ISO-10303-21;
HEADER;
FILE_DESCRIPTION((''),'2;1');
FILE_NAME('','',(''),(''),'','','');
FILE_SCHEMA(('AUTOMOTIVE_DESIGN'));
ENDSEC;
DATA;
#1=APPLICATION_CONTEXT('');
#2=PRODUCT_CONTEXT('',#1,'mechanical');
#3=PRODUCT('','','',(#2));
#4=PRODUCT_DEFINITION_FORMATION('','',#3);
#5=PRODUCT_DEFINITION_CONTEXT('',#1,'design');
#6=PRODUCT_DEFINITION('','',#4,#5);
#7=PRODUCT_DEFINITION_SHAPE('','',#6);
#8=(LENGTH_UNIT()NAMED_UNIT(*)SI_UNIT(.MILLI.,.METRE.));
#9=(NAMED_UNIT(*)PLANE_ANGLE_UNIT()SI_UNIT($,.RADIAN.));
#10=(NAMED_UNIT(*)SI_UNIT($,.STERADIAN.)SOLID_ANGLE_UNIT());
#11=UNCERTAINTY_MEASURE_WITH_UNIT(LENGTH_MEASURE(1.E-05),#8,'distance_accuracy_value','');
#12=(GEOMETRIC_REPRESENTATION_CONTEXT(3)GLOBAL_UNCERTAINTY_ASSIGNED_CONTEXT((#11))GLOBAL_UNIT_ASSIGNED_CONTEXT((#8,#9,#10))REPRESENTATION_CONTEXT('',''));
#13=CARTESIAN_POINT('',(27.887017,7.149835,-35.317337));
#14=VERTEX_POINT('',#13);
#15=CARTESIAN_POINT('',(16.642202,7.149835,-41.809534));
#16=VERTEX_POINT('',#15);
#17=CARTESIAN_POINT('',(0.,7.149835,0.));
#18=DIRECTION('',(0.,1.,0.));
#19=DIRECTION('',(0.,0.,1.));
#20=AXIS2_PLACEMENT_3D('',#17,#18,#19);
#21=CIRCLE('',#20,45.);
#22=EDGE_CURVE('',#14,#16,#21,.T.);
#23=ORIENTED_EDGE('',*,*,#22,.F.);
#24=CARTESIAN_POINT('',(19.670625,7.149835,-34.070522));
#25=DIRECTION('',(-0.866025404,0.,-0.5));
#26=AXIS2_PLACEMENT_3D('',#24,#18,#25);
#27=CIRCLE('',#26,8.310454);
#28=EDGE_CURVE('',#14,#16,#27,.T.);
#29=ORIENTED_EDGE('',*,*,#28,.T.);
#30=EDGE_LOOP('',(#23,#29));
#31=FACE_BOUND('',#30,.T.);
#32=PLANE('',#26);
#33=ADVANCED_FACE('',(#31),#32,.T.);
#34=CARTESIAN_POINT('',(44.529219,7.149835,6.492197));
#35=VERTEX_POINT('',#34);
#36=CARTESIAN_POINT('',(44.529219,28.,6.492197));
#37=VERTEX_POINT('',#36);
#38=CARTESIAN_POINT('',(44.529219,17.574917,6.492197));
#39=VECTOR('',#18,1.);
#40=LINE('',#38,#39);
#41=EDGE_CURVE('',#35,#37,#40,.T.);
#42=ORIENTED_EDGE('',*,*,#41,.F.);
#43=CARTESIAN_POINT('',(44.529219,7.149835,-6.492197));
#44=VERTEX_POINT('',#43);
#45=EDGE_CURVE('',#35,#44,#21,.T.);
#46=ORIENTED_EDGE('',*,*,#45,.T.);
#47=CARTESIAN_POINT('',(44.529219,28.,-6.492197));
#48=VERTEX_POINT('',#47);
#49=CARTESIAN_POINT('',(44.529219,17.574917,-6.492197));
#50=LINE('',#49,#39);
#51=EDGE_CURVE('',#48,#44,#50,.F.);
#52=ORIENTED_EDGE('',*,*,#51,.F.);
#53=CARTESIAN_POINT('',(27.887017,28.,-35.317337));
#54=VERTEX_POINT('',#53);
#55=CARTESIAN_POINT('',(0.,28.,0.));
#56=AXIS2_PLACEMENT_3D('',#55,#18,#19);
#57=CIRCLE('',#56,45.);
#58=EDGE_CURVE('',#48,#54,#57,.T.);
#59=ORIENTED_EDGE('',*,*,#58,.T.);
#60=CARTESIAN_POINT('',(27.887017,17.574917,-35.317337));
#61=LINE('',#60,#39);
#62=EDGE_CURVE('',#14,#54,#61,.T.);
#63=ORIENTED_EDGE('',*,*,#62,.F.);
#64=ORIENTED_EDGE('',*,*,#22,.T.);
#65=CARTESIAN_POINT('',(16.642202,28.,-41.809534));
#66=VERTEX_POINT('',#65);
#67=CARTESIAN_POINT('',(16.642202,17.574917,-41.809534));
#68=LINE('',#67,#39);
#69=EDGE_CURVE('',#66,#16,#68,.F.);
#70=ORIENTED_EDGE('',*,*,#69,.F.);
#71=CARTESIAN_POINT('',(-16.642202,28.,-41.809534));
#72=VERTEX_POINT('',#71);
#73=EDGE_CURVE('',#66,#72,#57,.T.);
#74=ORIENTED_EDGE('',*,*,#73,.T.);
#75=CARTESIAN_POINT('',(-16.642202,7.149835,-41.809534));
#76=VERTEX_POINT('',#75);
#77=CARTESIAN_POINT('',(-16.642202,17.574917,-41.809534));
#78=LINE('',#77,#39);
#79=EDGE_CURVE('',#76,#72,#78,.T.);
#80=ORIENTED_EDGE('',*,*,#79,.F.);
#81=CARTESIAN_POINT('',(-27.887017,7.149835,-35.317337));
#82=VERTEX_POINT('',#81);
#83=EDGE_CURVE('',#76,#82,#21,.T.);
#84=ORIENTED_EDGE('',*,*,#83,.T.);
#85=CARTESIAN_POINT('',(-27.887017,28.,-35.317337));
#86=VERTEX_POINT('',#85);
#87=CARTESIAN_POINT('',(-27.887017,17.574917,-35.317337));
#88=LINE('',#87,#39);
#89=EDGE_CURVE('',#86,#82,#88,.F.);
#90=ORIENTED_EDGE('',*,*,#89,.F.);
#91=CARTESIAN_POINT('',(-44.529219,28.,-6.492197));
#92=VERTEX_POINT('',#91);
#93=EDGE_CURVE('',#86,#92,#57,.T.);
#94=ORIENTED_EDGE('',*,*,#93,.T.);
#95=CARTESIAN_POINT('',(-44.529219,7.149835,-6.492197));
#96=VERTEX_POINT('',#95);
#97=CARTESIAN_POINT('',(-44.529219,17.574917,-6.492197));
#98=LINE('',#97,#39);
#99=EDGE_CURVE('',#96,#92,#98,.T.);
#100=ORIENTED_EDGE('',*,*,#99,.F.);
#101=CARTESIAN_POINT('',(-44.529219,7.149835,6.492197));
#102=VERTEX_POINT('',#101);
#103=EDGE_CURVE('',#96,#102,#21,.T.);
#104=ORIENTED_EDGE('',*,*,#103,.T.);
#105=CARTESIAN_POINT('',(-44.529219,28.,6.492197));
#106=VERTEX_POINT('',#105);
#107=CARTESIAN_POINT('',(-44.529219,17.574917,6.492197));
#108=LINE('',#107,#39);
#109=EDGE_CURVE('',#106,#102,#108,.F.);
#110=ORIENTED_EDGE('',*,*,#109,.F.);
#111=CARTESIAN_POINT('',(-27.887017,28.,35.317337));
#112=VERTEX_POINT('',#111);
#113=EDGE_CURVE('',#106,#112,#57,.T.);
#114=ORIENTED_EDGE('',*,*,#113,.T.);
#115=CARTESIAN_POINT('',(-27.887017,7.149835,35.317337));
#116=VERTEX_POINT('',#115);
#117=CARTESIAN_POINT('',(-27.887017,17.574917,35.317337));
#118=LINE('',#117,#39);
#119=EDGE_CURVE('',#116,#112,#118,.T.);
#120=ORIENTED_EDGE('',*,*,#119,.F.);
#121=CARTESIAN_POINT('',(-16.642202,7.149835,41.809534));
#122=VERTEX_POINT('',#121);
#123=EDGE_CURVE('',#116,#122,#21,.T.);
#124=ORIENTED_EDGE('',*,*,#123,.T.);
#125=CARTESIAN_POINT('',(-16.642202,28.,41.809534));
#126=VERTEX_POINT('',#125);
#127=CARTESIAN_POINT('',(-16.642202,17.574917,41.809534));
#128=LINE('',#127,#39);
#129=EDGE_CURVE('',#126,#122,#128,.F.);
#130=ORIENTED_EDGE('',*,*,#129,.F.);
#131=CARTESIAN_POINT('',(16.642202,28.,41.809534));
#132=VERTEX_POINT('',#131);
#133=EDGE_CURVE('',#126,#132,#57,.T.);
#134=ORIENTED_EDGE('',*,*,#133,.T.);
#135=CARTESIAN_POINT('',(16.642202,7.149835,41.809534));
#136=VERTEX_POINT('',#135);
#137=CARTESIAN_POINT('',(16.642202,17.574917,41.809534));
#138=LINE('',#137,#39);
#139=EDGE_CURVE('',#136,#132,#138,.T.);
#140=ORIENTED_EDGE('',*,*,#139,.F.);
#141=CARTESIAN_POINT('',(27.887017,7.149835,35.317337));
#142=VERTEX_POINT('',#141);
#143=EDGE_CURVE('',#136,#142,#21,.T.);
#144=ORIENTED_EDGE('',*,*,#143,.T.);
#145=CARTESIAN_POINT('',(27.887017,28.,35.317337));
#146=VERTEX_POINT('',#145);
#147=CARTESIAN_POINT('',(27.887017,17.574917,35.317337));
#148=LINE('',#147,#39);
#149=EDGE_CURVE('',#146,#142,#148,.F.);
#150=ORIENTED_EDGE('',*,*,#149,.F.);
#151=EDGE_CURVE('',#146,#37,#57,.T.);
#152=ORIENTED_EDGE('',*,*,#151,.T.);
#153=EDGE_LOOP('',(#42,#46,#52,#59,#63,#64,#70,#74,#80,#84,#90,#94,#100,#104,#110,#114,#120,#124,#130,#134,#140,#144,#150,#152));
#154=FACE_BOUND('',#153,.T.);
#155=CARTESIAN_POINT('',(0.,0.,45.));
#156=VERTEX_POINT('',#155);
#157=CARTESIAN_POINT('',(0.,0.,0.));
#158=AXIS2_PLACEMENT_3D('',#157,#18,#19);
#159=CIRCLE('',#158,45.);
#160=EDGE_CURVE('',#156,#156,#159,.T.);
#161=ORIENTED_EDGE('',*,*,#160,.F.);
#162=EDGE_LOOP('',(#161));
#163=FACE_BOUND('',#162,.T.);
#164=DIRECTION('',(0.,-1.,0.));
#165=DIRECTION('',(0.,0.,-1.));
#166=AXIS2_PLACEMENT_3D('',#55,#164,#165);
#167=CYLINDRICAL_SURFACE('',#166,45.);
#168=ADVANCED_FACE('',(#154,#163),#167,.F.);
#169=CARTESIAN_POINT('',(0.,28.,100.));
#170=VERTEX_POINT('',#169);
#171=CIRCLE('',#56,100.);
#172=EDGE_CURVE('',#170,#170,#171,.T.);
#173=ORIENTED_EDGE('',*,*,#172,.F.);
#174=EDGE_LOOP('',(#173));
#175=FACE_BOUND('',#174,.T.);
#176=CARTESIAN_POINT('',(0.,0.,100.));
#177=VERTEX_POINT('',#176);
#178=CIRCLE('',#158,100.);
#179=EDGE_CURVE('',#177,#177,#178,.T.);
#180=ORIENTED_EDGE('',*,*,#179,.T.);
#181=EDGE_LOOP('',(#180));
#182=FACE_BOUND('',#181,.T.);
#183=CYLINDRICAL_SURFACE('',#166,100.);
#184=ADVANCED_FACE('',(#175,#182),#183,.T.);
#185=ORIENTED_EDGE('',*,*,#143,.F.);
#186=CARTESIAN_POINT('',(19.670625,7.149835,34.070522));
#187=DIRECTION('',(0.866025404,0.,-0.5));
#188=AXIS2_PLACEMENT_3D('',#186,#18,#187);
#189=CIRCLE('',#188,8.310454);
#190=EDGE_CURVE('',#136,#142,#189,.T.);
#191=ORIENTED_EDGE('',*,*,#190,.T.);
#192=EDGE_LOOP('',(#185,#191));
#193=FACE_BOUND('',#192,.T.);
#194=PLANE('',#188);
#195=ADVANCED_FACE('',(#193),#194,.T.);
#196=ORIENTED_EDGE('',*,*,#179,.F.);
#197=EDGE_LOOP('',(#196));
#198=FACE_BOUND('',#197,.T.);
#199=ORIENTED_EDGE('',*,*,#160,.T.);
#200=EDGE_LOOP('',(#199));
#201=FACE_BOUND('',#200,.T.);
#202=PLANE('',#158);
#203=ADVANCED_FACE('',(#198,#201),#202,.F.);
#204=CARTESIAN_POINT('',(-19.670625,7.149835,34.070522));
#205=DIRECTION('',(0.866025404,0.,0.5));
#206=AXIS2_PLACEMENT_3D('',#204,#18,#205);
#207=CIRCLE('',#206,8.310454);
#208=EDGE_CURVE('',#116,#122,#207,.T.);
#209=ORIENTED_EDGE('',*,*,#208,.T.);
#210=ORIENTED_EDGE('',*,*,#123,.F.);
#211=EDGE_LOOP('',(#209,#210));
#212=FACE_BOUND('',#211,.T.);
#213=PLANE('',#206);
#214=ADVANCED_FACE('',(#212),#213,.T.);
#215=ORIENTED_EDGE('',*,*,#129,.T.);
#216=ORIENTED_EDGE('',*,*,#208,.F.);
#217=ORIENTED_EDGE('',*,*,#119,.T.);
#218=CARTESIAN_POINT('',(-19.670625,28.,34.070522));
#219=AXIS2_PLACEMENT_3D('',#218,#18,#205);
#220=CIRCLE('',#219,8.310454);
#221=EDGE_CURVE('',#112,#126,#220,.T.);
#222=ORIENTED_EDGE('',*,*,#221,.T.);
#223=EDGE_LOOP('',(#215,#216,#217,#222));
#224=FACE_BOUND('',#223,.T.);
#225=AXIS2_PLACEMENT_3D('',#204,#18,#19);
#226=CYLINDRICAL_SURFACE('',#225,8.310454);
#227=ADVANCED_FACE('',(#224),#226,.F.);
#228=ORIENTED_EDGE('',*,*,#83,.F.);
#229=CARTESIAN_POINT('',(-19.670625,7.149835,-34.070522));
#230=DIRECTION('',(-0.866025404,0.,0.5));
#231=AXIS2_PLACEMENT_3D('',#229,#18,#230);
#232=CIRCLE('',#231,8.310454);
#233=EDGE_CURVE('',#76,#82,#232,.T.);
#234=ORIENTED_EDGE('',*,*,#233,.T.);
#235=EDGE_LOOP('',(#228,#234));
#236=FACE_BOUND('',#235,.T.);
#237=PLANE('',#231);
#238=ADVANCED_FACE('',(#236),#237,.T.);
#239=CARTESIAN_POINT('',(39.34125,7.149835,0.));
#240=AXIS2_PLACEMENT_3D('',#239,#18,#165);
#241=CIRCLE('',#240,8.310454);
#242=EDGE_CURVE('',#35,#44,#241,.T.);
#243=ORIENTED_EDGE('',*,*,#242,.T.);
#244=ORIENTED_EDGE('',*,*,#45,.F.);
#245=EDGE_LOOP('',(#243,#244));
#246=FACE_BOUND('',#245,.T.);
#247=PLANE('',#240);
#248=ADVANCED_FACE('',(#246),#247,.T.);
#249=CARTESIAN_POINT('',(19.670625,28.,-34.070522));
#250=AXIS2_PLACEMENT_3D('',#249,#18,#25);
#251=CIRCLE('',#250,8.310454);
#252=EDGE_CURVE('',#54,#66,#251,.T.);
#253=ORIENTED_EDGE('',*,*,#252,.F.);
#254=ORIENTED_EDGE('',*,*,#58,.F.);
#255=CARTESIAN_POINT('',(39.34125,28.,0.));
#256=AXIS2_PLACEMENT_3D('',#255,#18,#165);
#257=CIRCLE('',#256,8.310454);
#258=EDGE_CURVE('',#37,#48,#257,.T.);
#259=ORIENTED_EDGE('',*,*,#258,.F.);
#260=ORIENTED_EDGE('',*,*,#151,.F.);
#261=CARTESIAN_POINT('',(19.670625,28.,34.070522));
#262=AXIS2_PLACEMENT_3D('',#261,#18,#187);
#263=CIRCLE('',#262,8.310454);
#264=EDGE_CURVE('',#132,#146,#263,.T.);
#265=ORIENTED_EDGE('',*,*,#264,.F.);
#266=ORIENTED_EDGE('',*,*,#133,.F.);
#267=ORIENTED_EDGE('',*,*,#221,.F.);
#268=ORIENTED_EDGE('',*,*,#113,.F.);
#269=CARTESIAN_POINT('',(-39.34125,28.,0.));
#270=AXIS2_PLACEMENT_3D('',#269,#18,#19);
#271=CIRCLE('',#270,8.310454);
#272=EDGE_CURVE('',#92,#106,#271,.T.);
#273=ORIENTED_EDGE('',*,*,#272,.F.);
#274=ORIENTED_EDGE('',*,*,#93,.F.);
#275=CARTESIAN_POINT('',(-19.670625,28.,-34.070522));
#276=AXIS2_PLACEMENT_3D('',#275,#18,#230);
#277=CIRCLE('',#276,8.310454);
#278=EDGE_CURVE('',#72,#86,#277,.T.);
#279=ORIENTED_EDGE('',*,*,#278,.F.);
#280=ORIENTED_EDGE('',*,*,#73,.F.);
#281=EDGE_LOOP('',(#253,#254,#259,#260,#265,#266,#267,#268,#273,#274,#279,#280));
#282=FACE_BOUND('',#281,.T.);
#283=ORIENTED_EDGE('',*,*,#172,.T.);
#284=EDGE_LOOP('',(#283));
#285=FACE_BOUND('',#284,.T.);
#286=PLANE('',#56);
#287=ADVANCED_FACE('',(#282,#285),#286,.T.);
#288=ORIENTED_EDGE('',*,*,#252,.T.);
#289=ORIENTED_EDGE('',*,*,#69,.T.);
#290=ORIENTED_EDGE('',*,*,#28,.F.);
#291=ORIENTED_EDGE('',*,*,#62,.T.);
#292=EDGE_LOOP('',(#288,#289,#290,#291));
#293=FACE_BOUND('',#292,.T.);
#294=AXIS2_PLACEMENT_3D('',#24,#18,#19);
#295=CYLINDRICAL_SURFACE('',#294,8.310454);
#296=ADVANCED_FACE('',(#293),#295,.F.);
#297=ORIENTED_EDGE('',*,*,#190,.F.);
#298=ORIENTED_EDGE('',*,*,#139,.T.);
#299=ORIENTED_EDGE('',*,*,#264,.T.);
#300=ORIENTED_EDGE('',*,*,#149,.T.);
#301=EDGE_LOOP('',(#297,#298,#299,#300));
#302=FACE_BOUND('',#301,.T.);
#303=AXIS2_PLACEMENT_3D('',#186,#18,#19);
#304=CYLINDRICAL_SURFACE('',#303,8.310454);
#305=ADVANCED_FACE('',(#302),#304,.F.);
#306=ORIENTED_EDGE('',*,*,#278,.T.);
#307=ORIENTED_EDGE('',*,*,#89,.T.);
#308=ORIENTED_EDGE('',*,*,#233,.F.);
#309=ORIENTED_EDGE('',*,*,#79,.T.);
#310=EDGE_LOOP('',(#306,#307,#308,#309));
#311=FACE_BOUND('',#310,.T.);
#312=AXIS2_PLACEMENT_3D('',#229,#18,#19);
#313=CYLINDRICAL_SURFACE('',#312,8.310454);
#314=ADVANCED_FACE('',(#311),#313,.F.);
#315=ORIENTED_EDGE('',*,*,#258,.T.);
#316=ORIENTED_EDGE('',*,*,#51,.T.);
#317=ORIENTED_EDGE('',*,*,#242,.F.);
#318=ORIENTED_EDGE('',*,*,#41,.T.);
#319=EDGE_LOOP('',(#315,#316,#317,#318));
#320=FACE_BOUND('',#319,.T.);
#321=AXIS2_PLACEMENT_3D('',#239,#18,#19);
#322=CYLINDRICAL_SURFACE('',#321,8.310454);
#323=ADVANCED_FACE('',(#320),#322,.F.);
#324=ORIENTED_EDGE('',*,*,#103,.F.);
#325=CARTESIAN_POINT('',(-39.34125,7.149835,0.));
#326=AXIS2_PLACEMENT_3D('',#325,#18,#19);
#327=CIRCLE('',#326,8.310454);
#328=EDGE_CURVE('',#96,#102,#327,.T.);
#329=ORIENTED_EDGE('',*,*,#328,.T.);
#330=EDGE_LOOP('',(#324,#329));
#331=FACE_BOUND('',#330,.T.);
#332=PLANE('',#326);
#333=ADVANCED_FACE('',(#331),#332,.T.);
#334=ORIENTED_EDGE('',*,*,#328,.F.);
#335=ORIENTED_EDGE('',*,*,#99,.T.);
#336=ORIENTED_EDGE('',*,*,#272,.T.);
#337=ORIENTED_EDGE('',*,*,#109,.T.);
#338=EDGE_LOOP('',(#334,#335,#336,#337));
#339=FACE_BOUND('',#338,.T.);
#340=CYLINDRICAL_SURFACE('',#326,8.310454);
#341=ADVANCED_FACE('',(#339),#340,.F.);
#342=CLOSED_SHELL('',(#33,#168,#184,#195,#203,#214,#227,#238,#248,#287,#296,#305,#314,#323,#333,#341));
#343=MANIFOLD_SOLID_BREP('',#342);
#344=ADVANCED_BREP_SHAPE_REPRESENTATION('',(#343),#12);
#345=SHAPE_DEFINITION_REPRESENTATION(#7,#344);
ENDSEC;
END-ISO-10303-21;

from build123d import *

# Parameters (mm, degrees)
SKETCH1_R           = 100
BOSS_EXTRUDE1_DEPTH = 28
SKETCH2_R           = 45
CUT_EXTRUDE1_DEPTH  = 145.166570328
SKETCH3_R           = 8.310454224
CUT_EXTRUDE2_DEPTH  = 20.850165171
CIRPATTERN1_COUNT   = 6


with BuildPart() as part:
    # Sketch1 → Boss-Extrude1 (new body)
    with BuildSketch(Plane(origin=(0, 0, 0), x_dir=(1, 0, 0), z_dir=(0, 1, 0))):
        Circle(SKETCH1_R)
    extrude(amount=BOSS_EXTRUDE1_DEPTH)

    # Sketch2 → Cut-Extrude1 (cut, through all)
    with BuildSketch(Plane(origin=(0, 0, 0), x_dir=(1, 0, 0), z_dir=(0, 1, 0))):
        Circle(SKETCH2_R)
    extrude(amount=CUT_EXTRUDE1_DEPTH, mode=Mode.SUBTRACT)

    # Sketch3 → Cut-Extrude2 (cut)
    with BuildSketch(Plane(origin=(0, 28, 0), x_dir=(1, 0, 0), z_dir=(0, 1, 0))):
        with Locations((-39.341250026, 0)):
            Circle(SKETCH3_R)
    cut_extrude2 = extrude(amount=-CUT_EXTRUDE2_DEPTH, mode=Mode.SUBTRACT)

    # CirPattern1: Cut-Extrude2 ×6 about axis
    cirpattern1_axis = Axis((0, 0, 0), (0, 1, 0))
    for i in range(1, CIRPATTERN1_COUNT):
        add(cut_extrude2.rotate(cirpattern1_axis, i * 360 / CIRPATTERN1_COUNT), mode=Mode.SUBTRACT)


solid = part.part
